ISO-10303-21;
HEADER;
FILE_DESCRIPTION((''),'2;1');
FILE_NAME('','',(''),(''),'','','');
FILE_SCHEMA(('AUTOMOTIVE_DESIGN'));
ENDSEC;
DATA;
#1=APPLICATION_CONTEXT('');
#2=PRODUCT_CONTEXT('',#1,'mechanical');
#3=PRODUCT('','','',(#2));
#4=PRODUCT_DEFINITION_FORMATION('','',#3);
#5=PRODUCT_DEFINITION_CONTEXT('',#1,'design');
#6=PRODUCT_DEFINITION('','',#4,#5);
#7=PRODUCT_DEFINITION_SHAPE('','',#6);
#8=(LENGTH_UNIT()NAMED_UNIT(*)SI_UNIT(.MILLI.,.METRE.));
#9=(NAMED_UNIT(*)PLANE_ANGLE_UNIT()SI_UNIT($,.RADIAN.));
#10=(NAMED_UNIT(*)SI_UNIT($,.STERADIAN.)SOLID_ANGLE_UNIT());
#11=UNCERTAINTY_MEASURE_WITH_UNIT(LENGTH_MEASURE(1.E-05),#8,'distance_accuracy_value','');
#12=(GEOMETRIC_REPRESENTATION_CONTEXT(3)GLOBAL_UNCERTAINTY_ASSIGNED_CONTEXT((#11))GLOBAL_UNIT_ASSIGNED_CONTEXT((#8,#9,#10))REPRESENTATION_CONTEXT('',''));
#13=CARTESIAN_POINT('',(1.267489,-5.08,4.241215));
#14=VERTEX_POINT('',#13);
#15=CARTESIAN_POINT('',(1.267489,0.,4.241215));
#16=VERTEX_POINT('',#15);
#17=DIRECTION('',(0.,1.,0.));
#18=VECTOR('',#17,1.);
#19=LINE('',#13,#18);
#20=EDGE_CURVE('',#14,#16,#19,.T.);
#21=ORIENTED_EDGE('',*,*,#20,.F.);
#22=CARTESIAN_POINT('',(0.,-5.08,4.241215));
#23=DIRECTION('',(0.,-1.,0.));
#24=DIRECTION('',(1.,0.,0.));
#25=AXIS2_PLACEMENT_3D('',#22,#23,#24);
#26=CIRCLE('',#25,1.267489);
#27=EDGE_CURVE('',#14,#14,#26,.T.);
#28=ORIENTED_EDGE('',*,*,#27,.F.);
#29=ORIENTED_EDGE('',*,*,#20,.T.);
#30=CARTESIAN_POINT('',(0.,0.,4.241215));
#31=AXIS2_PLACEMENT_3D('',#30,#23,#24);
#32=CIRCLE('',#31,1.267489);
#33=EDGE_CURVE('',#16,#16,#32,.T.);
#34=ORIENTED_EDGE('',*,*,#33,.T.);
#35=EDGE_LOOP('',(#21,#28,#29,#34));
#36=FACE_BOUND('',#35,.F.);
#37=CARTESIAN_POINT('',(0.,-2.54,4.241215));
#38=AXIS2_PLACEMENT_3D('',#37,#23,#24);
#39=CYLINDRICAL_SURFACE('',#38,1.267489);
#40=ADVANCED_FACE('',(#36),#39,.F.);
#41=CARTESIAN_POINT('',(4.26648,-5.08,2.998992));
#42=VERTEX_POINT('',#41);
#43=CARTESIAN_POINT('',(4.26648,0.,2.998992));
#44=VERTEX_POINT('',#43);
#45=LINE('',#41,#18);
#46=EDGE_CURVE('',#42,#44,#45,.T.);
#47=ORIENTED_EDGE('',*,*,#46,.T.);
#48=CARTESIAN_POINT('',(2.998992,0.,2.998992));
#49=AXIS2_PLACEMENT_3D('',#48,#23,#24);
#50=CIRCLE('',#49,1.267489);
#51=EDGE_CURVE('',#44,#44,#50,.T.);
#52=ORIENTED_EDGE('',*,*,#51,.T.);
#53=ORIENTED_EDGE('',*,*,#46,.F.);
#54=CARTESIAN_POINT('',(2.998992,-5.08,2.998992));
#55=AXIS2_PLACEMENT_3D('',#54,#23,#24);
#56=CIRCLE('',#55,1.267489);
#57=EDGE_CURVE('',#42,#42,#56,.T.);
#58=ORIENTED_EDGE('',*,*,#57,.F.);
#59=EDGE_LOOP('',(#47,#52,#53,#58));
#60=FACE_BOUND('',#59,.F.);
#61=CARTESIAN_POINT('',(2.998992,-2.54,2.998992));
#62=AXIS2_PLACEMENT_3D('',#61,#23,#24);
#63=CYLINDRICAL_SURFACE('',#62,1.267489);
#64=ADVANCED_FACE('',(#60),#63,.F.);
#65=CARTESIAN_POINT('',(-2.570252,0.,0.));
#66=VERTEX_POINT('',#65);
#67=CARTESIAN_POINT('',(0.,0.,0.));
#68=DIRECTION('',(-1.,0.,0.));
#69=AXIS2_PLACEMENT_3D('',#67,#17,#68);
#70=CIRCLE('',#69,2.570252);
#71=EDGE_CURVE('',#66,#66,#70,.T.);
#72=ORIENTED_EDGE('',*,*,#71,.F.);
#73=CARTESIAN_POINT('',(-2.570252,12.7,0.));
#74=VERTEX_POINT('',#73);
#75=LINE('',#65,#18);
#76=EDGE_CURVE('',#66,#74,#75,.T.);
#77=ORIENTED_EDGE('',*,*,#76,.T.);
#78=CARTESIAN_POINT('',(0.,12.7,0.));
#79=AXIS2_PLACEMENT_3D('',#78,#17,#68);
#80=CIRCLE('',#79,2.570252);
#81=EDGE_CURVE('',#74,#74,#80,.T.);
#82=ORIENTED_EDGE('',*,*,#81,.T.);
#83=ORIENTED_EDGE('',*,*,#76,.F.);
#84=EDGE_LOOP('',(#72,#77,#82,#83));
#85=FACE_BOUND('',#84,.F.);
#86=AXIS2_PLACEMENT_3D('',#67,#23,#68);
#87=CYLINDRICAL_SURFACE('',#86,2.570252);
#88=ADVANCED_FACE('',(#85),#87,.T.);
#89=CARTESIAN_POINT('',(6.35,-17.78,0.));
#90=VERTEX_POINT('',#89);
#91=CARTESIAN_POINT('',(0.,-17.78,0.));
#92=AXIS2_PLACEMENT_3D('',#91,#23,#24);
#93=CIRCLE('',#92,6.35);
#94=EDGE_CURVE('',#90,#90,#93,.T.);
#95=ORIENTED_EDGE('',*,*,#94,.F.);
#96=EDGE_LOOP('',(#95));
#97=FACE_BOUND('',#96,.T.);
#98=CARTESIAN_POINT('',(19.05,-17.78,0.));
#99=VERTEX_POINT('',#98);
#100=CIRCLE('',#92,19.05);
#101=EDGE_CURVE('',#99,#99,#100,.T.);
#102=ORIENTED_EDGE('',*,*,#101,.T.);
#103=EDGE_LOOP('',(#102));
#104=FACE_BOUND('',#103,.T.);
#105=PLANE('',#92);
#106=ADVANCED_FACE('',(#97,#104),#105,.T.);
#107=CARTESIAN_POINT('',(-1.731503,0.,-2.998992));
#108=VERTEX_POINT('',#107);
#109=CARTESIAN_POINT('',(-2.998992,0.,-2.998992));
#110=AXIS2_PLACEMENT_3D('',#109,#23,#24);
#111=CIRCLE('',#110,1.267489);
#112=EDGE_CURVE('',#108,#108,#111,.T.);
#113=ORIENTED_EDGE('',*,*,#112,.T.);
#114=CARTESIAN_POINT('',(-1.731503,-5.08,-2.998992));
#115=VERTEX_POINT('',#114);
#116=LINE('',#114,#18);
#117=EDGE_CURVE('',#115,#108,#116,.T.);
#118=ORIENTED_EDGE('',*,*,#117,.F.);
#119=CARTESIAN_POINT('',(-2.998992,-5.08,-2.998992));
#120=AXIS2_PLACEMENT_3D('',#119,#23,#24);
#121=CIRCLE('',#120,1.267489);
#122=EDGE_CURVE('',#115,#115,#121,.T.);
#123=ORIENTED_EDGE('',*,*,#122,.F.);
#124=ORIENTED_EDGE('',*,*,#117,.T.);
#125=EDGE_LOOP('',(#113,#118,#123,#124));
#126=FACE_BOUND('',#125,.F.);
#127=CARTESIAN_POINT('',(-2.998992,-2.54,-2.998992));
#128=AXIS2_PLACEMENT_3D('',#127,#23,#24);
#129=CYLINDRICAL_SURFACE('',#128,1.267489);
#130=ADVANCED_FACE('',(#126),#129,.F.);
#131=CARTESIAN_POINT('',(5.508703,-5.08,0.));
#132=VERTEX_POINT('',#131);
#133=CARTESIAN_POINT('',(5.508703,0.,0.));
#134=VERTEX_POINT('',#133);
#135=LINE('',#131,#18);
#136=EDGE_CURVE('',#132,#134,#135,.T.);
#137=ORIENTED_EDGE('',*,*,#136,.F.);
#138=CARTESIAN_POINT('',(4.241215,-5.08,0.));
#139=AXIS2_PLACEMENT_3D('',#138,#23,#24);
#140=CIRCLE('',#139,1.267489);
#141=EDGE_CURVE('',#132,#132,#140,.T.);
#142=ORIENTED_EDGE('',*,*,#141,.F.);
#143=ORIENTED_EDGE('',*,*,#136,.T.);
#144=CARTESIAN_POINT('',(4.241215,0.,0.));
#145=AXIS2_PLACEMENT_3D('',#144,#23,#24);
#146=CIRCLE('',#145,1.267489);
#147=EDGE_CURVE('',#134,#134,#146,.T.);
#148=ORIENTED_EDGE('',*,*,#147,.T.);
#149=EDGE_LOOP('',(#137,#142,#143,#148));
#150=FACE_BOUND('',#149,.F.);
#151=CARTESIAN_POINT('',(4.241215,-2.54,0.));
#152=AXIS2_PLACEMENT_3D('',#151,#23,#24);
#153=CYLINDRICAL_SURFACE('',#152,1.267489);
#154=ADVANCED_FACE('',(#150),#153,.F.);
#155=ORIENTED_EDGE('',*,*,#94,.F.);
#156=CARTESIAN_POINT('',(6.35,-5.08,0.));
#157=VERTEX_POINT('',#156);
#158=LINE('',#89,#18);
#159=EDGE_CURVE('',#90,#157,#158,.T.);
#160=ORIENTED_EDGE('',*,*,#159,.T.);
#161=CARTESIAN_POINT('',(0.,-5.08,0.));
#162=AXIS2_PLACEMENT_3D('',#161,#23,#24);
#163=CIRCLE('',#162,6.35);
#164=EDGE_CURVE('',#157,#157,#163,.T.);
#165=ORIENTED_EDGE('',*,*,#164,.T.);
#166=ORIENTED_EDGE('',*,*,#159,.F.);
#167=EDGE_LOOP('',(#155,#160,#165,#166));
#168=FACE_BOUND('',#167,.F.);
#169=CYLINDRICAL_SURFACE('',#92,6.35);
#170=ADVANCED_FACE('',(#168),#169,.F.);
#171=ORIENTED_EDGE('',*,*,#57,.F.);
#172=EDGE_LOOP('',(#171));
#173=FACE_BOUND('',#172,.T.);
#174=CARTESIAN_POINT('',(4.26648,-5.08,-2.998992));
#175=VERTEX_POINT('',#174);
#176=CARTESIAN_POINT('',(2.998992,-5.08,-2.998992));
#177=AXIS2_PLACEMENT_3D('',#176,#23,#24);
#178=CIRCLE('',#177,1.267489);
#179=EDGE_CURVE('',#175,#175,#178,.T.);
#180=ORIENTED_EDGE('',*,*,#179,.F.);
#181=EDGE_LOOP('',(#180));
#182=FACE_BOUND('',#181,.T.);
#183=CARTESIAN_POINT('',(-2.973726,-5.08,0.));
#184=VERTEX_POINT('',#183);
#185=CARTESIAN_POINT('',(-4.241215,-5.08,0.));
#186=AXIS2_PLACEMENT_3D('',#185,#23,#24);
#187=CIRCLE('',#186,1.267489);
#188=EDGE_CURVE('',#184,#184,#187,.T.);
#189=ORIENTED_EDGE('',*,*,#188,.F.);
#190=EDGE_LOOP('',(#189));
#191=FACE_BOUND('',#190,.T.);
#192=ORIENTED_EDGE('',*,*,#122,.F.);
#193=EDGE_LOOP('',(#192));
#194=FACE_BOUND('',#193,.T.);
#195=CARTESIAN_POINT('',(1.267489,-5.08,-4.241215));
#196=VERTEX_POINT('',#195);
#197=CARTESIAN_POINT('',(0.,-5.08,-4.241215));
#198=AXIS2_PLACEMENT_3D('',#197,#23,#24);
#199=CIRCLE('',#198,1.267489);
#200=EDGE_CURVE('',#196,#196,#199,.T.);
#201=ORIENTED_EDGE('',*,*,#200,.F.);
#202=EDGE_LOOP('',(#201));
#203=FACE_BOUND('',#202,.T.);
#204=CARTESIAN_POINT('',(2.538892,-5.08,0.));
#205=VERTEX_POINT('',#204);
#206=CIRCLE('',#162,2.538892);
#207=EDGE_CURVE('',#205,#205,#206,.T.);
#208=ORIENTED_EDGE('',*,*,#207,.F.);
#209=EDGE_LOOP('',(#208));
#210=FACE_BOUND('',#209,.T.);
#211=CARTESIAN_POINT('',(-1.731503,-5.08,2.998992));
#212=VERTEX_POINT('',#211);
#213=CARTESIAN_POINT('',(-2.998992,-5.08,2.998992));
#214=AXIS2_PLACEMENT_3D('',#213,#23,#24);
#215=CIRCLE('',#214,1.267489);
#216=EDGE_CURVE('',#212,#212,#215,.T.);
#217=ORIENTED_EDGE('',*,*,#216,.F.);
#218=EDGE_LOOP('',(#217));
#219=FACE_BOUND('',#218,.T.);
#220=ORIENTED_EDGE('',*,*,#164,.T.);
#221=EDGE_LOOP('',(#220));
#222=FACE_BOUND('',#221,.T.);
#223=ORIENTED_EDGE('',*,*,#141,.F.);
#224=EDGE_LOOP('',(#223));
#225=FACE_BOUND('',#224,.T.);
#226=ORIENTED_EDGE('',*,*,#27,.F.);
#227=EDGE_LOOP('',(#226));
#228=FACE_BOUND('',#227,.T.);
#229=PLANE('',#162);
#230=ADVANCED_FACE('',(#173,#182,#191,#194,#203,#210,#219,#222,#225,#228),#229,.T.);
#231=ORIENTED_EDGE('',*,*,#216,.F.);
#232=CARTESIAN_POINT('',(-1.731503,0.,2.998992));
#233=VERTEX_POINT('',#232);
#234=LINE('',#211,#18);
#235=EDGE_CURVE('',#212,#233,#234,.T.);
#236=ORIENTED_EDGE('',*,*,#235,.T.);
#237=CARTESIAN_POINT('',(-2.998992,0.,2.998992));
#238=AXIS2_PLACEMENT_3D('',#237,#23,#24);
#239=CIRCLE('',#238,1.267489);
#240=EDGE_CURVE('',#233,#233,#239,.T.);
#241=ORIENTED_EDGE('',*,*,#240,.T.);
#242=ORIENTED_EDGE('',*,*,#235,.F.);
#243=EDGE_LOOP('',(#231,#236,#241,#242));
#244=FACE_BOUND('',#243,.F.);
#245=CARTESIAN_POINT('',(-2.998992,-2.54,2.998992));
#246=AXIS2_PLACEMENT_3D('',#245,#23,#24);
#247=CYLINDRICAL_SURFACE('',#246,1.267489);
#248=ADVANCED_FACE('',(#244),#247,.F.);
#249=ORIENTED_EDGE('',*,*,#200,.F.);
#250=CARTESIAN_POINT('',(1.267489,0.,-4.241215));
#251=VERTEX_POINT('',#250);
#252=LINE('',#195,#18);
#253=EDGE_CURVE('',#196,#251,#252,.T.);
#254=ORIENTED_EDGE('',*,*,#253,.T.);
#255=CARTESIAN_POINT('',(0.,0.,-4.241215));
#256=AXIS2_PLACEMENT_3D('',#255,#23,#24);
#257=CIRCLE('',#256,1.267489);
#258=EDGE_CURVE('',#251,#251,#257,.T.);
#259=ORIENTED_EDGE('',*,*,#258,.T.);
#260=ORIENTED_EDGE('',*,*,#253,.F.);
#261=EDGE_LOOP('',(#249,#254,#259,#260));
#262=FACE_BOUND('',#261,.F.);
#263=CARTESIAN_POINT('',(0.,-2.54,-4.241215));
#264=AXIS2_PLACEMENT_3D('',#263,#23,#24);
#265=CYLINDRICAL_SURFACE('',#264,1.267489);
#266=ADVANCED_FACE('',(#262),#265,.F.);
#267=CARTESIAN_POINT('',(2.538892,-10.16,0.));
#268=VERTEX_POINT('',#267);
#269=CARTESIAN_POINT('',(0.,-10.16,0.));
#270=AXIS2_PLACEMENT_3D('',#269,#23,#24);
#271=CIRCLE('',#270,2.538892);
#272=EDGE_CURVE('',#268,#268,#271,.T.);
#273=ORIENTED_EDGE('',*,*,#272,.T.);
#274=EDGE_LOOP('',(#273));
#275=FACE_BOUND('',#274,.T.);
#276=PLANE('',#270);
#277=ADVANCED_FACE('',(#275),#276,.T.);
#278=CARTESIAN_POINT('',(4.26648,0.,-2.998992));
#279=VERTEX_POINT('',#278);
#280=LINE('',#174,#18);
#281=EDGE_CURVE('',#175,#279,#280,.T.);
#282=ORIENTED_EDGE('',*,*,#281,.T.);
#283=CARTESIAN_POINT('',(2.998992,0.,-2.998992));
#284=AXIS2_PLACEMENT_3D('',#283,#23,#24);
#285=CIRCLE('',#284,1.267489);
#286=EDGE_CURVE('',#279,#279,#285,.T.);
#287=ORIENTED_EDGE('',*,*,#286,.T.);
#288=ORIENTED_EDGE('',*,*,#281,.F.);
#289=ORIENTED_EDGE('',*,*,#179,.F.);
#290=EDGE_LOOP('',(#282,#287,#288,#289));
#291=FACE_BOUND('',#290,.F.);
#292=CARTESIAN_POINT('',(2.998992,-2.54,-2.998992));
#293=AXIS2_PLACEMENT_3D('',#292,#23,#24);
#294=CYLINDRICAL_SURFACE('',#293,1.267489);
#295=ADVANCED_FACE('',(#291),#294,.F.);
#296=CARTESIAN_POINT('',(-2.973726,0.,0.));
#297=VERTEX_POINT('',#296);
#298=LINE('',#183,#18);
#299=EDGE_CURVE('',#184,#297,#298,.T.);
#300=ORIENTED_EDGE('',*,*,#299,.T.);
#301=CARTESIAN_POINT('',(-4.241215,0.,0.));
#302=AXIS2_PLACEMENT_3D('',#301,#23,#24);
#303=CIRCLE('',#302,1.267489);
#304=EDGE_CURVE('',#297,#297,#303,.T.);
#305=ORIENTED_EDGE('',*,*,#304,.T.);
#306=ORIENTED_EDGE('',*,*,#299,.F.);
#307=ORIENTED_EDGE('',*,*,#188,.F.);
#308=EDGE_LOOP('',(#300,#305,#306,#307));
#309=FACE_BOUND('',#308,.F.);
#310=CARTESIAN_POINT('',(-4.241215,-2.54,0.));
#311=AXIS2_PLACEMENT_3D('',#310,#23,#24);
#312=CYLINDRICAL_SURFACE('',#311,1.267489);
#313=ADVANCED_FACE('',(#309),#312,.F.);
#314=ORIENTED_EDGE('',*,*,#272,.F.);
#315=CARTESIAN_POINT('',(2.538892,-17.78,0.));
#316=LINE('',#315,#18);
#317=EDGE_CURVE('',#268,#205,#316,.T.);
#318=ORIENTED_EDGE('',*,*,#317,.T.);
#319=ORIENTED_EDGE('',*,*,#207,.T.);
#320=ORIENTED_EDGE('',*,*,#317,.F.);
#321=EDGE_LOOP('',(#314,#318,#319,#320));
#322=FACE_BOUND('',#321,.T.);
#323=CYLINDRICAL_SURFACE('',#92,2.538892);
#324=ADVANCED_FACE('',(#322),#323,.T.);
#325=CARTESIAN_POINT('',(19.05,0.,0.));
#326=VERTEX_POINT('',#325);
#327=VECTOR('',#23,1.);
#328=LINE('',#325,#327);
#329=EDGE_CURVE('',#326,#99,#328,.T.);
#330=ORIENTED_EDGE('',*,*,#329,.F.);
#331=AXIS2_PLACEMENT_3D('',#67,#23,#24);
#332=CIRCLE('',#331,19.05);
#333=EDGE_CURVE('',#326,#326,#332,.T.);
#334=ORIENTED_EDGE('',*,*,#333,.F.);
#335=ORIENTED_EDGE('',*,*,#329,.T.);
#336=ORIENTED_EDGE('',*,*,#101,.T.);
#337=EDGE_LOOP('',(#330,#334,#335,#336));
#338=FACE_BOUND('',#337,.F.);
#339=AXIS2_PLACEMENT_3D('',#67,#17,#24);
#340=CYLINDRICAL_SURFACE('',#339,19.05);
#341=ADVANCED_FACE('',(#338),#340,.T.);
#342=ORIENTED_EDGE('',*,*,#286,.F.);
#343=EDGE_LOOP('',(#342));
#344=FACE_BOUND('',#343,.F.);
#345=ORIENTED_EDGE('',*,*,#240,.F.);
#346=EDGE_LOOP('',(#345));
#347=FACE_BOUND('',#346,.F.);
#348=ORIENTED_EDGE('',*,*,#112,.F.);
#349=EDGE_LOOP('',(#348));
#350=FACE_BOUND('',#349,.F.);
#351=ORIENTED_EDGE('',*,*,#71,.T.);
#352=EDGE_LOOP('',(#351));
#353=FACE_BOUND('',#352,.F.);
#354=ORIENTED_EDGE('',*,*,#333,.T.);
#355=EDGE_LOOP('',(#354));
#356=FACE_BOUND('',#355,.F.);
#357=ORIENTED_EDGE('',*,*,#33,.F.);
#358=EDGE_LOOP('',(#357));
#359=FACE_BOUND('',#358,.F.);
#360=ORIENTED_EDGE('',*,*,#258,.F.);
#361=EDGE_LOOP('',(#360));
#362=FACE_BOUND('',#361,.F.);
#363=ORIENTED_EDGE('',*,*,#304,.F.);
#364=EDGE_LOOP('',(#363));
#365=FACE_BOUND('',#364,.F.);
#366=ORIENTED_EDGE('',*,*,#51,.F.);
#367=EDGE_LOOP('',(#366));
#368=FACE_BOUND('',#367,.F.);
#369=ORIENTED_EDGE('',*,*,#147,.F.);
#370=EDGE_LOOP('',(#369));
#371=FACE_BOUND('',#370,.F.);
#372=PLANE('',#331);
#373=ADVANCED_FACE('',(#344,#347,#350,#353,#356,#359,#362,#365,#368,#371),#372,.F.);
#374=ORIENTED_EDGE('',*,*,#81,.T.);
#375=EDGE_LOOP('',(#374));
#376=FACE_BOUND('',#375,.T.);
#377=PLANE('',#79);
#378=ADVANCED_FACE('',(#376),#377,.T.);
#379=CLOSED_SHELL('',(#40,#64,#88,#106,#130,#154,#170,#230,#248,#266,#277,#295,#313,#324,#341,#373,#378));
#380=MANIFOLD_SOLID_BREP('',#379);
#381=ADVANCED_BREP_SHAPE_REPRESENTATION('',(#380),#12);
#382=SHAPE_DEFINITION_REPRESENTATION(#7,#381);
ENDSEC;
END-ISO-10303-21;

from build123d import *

# Parameters (mm, degrees)
F0_R      = 19.05
F1_DEPTH  = 17.78
F4_R      = 6.35
F4_R_2    = 2.5388917956
F5_DEPTH  = 12.7
F2_R      = 2.5388917956
F2_R_2    = 2.4229582781
F6_DEPTH  = 7.62
F8_R      = 1.2674888325
F9_DEPTH  = 2.54
F10_DEPTH = 25.4
F11_R     = 2.5702523623
F3_R      = 2.519460743
F12_DEPTH = 12.7


# Not quite as in the source:
# - a feature of the source that left no trace in its solid (it failed there, or was rolled back) is left out


with BuildPart() as f1:
    # F0 (on Front) → F1 (new body)
    with BuildSketch(Plane.XZ):
        Circle(F0_R)
    extrude(amount=F1_DEPTH)

    # F4 (on face) → F5 (cut)
    with BuildSketch(Plane.XZ.offset(17.78)):
        Circle(F4_R)
        Circle(F4_R_2, mode=Mode.SUBTRACT)
    extrude(amount=-F5_DEPTH, mode=Mode.SUBTRACT)

    # F2 (on face) → F6 (cut)
    with BuildSketch(Plane.XZ.offset(17.78)):
        Circle(F2_R)
        Circle(F2_R_2, mode=Mode.SUBTRACT)
        Circle(F2_R_2)
    extrude(amount=-F6_DEPTH, mode=Mode.SUBTRACT)

    # F8 (on face) → F9 (cut)
    with BuildSketch(Plane.XZ.offset(5.08)):
        with Locations((-4.2412145995, 0)):
            Circle(F8_R)
        with Locations((-2.9989916037, 2.9989916037)):
            Circle(F8_R)
        with Locations((0, 4.2412145995)):
            Circle(F8_R)
        with Locations((2.9989916037, 2.9989916037)):
            Circle(F8_R)
        with Locations((4.2412145995, 0)):
            Circle(F8_R)
        with Locations((2.9989916037, -2.9989916037)):
            Circle(F8_R)
        with Locations((0, -4.2412145995)):
            Circle(F8_R)
        with Locations((-2.9989916037, -2.9989916037)):
            Circle(F8_R)
    extrude(amount=-F9_DEPTH, mode=Mode.SUBTRACT)

    # F10 (cut): faces of the model
    f10_faces = [f1.faces().sort_by_distance(p)[0] for p in [
        (-2.9989916037, -2.54, 2.9989916037),
        (-4.2412145995, -2.54, 0),
        (-2.9989916037, -2.54, -2.9989916037),
        (0, -2.54, -4.2412145995),
        (2.9989916037, -2.54, -2.9989916037),
        (4.2412145995, -2.54, 0),
        (2.9989916037, -2.54, 2.9989916037),
        (0, -2.54, 4.2412145995),
    ]]
    extrude(f10_faces, amount=-F10_DEPTH, mode=Mode.SUBTRACT)

    # F11 (on face) + F3 (on face) → F12 (join)
    with BuildSketch(Plane(origin=(0, 0, 0), x_dir=(-1, 0, 0), z_dir=(0, 1, 0))):
        Circle(F11_R)
    with BuildSketch(Plane(origin=(0, 0, 0), x_dir=(-1, 0, 0), z_dir=(0, 1, 0))):
        Circle(F3_R)
    extrude(amount=F12_DEPTH)


solid = f1.part
